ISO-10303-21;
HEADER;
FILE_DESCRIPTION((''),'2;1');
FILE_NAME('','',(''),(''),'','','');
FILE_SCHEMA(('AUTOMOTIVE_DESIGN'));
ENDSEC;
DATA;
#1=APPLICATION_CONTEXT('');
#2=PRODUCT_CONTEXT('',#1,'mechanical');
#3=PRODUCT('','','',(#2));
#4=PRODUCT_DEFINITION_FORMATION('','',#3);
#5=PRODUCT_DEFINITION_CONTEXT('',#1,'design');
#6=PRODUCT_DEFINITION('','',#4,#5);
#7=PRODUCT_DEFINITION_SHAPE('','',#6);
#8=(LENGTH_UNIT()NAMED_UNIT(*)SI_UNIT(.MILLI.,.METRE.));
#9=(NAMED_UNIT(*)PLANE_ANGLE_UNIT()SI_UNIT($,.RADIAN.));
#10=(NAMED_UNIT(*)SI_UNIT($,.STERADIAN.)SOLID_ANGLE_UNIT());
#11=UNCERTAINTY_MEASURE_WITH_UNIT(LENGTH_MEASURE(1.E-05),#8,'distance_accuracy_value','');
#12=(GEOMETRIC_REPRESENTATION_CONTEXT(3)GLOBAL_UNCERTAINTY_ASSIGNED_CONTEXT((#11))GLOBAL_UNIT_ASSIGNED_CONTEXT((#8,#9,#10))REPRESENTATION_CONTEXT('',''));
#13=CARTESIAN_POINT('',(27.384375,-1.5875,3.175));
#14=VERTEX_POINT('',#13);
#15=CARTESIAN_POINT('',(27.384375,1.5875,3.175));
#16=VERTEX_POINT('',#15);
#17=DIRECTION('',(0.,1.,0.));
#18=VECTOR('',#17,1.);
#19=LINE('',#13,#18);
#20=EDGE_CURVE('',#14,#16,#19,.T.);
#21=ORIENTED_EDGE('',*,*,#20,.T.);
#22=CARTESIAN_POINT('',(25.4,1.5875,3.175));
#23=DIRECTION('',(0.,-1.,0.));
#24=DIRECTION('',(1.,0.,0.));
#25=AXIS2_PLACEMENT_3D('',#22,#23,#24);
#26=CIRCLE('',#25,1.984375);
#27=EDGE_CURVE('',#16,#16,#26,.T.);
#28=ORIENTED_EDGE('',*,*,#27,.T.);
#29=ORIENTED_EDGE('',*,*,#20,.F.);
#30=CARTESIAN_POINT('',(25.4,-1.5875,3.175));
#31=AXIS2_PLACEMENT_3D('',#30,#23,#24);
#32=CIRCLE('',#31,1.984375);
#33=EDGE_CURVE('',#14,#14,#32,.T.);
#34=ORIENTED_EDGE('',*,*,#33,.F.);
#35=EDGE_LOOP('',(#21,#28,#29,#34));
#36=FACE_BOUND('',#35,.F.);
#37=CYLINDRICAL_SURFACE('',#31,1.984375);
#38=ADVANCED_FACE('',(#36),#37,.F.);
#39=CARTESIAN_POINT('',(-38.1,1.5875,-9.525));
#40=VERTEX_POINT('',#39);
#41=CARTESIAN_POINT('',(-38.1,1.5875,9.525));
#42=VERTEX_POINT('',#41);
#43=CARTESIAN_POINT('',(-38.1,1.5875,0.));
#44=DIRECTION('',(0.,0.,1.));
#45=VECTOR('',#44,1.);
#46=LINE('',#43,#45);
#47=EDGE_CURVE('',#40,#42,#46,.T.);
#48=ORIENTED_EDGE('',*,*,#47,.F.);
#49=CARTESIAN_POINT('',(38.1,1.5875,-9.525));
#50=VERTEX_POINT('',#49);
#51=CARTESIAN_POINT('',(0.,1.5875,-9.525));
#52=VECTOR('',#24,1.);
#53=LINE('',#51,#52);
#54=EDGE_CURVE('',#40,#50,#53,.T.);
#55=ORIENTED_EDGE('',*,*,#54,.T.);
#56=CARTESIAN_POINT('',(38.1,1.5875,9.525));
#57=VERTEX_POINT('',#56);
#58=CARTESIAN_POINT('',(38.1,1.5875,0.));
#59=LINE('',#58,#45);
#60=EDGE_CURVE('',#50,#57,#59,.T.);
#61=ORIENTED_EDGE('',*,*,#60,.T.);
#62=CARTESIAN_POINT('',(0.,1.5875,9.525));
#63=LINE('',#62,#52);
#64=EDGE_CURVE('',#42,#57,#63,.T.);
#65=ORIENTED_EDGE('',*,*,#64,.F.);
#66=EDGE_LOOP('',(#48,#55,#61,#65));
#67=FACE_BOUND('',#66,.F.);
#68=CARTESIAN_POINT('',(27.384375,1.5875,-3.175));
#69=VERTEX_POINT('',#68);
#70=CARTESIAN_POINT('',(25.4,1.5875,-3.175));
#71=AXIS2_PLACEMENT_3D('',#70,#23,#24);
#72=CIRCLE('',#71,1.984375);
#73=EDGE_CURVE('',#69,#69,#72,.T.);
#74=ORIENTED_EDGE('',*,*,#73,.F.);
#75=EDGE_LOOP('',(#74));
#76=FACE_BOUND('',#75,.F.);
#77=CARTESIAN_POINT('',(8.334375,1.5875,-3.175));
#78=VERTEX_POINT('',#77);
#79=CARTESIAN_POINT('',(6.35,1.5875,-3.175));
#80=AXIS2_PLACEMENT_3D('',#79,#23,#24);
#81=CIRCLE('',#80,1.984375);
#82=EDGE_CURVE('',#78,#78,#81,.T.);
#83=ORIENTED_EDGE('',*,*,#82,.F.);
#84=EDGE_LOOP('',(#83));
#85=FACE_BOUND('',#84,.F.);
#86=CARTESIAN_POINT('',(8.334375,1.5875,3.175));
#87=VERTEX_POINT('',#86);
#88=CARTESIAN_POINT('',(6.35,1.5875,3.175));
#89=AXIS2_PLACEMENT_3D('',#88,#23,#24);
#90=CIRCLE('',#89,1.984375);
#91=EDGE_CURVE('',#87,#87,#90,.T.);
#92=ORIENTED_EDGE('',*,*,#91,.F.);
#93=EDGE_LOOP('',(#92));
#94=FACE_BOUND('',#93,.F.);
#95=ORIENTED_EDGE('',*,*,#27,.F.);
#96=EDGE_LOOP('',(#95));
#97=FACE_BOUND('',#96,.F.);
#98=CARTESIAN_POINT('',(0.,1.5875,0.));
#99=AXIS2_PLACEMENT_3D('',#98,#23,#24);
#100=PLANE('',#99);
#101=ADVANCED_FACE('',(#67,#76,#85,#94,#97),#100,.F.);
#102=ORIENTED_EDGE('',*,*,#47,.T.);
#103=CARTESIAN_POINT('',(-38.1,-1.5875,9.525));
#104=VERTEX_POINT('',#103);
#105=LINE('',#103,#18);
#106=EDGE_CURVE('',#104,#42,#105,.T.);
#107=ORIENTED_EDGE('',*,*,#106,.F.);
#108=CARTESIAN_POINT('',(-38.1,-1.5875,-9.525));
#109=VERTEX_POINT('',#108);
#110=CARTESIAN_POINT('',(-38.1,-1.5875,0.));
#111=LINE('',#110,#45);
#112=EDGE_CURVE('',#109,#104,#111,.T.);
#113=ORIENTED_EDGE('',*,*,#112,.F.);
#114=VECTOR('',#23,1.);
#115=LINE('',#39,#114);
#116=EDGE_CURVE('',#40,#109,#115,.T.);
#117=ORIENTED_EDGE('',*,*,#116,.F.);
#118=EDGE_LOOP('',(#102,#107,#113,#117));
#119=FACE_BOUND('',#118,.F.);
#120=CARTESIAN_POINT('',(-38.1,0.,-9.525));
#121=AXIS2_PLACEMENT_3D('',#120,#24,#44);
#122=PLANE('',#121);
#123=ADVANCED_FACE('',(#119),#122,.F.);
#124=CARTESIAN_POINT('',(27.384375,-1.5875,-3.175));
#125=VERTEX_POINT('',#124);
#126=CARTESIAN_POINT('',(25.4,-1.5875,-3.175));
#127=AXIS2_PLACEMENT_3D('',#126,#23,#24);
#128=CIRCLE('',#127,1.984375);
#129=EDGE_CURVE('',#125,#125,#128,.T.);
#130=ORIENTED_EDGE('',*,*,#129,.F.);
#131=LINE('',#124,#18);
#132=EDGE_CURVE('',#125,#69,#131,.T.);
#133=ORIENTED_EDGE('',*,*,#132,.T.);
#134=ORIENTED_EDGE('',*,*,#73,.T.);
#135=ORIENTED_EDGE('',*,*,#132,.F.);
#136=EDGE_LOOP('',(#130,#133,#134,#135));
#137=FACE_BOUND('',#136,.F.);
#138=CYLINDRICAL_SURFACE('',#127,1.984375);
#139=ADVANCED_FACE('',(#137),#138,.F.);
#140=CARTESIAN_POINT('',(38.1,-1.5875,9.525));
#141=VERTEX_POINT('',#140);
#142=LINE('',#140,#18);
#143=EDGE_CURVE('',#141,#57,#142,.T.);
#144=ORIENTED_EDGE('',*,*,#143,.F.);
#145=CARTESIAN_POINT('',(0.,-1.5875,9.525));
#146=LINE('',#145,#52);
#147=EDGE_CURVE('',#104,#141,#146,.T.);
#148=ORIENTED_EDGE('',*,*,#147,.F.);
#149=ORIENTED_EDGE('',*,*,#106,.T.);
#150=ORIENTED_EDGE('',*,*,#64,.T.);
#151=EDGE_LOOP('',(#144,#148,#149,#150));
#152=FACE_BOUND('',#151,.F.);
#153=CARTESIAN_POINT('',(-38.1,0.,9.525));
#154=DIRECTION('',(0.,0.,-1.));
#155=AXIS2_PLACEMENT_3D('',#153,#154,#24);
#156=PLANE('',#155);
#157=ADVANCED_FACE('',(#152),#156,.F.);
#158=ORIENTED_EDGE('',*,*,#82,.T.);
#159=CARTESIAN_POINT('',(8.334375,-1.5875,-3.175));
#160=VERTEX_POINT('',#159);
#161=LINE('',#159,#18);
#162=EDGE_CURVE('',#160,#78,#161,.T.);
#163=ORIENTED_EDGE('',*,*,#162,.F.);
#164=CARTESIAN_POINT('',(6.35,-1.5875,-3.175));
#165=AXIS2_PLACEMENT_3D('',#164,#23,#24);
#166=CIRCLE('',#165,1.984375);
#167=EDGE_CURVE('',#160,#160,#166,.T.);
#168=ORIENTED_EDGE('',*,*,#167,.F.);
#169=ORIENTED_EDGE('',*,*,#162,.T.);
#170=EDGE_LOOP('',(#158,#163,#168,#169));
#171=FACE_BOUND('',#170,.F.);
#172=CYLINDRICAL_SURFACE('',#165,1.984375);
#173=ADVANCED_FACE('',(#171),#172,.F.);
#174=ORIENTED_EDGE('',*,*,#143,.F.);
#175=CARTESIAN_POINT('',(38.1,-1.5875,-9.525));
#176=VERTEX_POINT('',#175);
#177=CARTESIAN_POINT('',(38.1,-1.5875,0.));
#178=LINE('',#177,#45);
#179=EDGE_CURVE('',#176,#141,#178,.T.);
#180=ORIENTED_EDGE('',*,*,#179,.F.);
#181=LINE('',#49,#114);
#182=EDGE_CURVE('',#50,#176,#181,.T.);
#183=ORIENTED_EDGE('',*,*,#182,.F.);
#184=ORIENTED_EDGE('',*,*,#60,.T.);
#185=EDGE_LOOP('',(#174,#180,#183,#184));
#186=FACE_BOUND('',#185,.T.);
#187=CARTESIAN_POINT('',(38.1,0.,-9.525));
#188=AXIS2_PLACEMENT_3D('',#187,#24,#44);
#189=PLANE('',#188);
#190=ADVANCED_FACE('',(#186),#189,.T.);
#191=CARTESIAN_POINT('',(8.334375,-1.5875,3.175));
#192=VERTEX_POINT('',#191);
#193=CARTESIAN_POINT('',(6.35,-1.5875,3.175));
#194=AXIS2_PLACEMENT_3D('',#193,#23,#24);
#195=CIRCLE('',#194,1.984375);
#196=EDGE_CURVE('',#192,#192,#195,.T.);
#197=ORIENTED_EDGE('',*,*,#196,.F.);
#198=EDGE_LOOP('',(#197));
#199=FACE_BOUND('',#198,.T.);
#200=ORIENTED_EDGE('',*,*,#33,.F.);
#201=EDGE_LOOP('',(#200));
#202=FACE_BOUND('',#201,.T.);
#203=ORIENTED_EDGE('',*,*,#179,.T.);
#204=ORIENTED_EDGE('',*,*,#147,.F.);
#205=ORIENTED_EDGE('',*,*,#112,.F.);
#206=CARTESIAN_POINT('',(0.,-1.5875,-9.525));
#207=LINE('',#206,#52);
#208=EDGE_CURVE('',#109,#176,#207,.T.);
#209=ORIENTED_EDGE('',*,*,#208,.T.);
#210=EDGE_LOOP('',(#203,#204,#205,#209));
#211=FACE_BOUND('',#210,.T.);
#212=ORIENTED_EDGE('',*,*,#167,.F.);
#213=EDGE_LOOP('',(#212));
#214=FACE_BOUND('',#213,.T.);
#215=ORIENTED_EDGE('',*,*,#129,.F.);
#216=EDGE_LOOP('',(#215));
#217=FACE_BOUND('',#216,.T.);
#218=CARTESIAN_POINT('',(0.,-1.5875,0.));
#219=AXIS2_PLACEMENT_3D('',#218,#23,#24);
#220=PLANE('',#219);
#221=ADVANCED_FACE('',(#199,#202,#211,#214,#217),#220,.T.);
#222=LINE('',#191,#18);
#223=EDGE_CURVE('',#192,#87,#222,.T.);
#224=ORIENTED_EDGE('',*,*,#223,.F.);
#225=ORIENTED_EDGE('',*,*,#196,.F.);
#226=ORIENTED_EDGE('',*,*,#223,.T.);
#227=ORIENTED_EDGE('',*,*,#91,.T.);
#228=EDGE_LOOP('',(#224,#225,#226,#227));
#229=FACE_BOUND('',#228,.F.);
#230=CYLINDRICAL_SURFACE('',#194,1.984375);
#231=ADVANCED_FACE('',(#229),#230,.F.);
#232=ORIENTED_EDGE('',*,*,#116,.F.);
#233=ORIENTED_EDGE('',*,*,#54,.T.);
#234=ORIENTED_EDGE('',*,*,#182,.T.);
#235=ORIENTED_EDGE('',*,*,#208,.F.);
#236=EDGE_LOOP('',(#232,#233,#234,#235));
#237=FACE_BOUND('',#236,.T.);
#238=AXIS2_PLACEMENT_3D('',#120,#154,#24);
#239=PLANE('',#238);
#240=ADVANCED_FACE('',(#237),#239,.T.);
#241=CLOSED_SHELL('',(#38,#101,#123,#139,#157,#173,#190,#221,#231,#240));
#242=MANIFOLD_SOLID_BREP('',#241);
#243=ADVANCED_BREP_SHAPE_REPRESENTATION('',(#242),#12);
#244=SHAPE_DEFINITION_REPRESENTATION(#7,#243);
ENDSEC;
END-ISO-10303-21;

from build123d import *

# Parameters (mm, degrees)
F0_W     = 76.2
F0_H     = 19.05
F1_DEPTH = 1.5875
F4_R     = 1.984375
F2_R     = 1.984375
F3_R     = 1.984375
F5_R     = 1.984375
F6_DEPTH = 3.175


# Not quite as in the source:
# - a length typed as a fraction of an inch, garbled in the dataset ("3 / 203.2 mm" for 3/8 in), is restored


with BuildPart() as f1:
    # F0 (on Front) → F1 (new body, symmetric)
    with BuildSketch(Plane.XZ):
        Rectangle(F0_W, F0_H)
    extrude(amount=F1_DEPTH, both=True)

    # F4 (on face) + F2 (on face) + F3 (on face) + F5 (on face) → F6 (cut, through all)
    with BuildSketch(Plane.XZ.offset(1.5875)):
        with Locations((6.35, -3.175)):
            Circle(F4_R)
    with BuildSketch(Plane.XZ.offset(1.5875)):
        with Locations((25.4, 3.175)):
            Circle(F2_R)
    with BuildSketch(Plane.XZ.offset(1.5875)):
        with Locations((25.4, -3.175)):
            Circle(F3_R)
    with BuildSketch(Plane.XZ.offset(1.5875)):
        with Locations((6.35, 3.175)):
            Circle(F5_R)
    extrude(amount=-F6_DEPTH, mode=Mode.SUBTRACT)


solid = f1.part
